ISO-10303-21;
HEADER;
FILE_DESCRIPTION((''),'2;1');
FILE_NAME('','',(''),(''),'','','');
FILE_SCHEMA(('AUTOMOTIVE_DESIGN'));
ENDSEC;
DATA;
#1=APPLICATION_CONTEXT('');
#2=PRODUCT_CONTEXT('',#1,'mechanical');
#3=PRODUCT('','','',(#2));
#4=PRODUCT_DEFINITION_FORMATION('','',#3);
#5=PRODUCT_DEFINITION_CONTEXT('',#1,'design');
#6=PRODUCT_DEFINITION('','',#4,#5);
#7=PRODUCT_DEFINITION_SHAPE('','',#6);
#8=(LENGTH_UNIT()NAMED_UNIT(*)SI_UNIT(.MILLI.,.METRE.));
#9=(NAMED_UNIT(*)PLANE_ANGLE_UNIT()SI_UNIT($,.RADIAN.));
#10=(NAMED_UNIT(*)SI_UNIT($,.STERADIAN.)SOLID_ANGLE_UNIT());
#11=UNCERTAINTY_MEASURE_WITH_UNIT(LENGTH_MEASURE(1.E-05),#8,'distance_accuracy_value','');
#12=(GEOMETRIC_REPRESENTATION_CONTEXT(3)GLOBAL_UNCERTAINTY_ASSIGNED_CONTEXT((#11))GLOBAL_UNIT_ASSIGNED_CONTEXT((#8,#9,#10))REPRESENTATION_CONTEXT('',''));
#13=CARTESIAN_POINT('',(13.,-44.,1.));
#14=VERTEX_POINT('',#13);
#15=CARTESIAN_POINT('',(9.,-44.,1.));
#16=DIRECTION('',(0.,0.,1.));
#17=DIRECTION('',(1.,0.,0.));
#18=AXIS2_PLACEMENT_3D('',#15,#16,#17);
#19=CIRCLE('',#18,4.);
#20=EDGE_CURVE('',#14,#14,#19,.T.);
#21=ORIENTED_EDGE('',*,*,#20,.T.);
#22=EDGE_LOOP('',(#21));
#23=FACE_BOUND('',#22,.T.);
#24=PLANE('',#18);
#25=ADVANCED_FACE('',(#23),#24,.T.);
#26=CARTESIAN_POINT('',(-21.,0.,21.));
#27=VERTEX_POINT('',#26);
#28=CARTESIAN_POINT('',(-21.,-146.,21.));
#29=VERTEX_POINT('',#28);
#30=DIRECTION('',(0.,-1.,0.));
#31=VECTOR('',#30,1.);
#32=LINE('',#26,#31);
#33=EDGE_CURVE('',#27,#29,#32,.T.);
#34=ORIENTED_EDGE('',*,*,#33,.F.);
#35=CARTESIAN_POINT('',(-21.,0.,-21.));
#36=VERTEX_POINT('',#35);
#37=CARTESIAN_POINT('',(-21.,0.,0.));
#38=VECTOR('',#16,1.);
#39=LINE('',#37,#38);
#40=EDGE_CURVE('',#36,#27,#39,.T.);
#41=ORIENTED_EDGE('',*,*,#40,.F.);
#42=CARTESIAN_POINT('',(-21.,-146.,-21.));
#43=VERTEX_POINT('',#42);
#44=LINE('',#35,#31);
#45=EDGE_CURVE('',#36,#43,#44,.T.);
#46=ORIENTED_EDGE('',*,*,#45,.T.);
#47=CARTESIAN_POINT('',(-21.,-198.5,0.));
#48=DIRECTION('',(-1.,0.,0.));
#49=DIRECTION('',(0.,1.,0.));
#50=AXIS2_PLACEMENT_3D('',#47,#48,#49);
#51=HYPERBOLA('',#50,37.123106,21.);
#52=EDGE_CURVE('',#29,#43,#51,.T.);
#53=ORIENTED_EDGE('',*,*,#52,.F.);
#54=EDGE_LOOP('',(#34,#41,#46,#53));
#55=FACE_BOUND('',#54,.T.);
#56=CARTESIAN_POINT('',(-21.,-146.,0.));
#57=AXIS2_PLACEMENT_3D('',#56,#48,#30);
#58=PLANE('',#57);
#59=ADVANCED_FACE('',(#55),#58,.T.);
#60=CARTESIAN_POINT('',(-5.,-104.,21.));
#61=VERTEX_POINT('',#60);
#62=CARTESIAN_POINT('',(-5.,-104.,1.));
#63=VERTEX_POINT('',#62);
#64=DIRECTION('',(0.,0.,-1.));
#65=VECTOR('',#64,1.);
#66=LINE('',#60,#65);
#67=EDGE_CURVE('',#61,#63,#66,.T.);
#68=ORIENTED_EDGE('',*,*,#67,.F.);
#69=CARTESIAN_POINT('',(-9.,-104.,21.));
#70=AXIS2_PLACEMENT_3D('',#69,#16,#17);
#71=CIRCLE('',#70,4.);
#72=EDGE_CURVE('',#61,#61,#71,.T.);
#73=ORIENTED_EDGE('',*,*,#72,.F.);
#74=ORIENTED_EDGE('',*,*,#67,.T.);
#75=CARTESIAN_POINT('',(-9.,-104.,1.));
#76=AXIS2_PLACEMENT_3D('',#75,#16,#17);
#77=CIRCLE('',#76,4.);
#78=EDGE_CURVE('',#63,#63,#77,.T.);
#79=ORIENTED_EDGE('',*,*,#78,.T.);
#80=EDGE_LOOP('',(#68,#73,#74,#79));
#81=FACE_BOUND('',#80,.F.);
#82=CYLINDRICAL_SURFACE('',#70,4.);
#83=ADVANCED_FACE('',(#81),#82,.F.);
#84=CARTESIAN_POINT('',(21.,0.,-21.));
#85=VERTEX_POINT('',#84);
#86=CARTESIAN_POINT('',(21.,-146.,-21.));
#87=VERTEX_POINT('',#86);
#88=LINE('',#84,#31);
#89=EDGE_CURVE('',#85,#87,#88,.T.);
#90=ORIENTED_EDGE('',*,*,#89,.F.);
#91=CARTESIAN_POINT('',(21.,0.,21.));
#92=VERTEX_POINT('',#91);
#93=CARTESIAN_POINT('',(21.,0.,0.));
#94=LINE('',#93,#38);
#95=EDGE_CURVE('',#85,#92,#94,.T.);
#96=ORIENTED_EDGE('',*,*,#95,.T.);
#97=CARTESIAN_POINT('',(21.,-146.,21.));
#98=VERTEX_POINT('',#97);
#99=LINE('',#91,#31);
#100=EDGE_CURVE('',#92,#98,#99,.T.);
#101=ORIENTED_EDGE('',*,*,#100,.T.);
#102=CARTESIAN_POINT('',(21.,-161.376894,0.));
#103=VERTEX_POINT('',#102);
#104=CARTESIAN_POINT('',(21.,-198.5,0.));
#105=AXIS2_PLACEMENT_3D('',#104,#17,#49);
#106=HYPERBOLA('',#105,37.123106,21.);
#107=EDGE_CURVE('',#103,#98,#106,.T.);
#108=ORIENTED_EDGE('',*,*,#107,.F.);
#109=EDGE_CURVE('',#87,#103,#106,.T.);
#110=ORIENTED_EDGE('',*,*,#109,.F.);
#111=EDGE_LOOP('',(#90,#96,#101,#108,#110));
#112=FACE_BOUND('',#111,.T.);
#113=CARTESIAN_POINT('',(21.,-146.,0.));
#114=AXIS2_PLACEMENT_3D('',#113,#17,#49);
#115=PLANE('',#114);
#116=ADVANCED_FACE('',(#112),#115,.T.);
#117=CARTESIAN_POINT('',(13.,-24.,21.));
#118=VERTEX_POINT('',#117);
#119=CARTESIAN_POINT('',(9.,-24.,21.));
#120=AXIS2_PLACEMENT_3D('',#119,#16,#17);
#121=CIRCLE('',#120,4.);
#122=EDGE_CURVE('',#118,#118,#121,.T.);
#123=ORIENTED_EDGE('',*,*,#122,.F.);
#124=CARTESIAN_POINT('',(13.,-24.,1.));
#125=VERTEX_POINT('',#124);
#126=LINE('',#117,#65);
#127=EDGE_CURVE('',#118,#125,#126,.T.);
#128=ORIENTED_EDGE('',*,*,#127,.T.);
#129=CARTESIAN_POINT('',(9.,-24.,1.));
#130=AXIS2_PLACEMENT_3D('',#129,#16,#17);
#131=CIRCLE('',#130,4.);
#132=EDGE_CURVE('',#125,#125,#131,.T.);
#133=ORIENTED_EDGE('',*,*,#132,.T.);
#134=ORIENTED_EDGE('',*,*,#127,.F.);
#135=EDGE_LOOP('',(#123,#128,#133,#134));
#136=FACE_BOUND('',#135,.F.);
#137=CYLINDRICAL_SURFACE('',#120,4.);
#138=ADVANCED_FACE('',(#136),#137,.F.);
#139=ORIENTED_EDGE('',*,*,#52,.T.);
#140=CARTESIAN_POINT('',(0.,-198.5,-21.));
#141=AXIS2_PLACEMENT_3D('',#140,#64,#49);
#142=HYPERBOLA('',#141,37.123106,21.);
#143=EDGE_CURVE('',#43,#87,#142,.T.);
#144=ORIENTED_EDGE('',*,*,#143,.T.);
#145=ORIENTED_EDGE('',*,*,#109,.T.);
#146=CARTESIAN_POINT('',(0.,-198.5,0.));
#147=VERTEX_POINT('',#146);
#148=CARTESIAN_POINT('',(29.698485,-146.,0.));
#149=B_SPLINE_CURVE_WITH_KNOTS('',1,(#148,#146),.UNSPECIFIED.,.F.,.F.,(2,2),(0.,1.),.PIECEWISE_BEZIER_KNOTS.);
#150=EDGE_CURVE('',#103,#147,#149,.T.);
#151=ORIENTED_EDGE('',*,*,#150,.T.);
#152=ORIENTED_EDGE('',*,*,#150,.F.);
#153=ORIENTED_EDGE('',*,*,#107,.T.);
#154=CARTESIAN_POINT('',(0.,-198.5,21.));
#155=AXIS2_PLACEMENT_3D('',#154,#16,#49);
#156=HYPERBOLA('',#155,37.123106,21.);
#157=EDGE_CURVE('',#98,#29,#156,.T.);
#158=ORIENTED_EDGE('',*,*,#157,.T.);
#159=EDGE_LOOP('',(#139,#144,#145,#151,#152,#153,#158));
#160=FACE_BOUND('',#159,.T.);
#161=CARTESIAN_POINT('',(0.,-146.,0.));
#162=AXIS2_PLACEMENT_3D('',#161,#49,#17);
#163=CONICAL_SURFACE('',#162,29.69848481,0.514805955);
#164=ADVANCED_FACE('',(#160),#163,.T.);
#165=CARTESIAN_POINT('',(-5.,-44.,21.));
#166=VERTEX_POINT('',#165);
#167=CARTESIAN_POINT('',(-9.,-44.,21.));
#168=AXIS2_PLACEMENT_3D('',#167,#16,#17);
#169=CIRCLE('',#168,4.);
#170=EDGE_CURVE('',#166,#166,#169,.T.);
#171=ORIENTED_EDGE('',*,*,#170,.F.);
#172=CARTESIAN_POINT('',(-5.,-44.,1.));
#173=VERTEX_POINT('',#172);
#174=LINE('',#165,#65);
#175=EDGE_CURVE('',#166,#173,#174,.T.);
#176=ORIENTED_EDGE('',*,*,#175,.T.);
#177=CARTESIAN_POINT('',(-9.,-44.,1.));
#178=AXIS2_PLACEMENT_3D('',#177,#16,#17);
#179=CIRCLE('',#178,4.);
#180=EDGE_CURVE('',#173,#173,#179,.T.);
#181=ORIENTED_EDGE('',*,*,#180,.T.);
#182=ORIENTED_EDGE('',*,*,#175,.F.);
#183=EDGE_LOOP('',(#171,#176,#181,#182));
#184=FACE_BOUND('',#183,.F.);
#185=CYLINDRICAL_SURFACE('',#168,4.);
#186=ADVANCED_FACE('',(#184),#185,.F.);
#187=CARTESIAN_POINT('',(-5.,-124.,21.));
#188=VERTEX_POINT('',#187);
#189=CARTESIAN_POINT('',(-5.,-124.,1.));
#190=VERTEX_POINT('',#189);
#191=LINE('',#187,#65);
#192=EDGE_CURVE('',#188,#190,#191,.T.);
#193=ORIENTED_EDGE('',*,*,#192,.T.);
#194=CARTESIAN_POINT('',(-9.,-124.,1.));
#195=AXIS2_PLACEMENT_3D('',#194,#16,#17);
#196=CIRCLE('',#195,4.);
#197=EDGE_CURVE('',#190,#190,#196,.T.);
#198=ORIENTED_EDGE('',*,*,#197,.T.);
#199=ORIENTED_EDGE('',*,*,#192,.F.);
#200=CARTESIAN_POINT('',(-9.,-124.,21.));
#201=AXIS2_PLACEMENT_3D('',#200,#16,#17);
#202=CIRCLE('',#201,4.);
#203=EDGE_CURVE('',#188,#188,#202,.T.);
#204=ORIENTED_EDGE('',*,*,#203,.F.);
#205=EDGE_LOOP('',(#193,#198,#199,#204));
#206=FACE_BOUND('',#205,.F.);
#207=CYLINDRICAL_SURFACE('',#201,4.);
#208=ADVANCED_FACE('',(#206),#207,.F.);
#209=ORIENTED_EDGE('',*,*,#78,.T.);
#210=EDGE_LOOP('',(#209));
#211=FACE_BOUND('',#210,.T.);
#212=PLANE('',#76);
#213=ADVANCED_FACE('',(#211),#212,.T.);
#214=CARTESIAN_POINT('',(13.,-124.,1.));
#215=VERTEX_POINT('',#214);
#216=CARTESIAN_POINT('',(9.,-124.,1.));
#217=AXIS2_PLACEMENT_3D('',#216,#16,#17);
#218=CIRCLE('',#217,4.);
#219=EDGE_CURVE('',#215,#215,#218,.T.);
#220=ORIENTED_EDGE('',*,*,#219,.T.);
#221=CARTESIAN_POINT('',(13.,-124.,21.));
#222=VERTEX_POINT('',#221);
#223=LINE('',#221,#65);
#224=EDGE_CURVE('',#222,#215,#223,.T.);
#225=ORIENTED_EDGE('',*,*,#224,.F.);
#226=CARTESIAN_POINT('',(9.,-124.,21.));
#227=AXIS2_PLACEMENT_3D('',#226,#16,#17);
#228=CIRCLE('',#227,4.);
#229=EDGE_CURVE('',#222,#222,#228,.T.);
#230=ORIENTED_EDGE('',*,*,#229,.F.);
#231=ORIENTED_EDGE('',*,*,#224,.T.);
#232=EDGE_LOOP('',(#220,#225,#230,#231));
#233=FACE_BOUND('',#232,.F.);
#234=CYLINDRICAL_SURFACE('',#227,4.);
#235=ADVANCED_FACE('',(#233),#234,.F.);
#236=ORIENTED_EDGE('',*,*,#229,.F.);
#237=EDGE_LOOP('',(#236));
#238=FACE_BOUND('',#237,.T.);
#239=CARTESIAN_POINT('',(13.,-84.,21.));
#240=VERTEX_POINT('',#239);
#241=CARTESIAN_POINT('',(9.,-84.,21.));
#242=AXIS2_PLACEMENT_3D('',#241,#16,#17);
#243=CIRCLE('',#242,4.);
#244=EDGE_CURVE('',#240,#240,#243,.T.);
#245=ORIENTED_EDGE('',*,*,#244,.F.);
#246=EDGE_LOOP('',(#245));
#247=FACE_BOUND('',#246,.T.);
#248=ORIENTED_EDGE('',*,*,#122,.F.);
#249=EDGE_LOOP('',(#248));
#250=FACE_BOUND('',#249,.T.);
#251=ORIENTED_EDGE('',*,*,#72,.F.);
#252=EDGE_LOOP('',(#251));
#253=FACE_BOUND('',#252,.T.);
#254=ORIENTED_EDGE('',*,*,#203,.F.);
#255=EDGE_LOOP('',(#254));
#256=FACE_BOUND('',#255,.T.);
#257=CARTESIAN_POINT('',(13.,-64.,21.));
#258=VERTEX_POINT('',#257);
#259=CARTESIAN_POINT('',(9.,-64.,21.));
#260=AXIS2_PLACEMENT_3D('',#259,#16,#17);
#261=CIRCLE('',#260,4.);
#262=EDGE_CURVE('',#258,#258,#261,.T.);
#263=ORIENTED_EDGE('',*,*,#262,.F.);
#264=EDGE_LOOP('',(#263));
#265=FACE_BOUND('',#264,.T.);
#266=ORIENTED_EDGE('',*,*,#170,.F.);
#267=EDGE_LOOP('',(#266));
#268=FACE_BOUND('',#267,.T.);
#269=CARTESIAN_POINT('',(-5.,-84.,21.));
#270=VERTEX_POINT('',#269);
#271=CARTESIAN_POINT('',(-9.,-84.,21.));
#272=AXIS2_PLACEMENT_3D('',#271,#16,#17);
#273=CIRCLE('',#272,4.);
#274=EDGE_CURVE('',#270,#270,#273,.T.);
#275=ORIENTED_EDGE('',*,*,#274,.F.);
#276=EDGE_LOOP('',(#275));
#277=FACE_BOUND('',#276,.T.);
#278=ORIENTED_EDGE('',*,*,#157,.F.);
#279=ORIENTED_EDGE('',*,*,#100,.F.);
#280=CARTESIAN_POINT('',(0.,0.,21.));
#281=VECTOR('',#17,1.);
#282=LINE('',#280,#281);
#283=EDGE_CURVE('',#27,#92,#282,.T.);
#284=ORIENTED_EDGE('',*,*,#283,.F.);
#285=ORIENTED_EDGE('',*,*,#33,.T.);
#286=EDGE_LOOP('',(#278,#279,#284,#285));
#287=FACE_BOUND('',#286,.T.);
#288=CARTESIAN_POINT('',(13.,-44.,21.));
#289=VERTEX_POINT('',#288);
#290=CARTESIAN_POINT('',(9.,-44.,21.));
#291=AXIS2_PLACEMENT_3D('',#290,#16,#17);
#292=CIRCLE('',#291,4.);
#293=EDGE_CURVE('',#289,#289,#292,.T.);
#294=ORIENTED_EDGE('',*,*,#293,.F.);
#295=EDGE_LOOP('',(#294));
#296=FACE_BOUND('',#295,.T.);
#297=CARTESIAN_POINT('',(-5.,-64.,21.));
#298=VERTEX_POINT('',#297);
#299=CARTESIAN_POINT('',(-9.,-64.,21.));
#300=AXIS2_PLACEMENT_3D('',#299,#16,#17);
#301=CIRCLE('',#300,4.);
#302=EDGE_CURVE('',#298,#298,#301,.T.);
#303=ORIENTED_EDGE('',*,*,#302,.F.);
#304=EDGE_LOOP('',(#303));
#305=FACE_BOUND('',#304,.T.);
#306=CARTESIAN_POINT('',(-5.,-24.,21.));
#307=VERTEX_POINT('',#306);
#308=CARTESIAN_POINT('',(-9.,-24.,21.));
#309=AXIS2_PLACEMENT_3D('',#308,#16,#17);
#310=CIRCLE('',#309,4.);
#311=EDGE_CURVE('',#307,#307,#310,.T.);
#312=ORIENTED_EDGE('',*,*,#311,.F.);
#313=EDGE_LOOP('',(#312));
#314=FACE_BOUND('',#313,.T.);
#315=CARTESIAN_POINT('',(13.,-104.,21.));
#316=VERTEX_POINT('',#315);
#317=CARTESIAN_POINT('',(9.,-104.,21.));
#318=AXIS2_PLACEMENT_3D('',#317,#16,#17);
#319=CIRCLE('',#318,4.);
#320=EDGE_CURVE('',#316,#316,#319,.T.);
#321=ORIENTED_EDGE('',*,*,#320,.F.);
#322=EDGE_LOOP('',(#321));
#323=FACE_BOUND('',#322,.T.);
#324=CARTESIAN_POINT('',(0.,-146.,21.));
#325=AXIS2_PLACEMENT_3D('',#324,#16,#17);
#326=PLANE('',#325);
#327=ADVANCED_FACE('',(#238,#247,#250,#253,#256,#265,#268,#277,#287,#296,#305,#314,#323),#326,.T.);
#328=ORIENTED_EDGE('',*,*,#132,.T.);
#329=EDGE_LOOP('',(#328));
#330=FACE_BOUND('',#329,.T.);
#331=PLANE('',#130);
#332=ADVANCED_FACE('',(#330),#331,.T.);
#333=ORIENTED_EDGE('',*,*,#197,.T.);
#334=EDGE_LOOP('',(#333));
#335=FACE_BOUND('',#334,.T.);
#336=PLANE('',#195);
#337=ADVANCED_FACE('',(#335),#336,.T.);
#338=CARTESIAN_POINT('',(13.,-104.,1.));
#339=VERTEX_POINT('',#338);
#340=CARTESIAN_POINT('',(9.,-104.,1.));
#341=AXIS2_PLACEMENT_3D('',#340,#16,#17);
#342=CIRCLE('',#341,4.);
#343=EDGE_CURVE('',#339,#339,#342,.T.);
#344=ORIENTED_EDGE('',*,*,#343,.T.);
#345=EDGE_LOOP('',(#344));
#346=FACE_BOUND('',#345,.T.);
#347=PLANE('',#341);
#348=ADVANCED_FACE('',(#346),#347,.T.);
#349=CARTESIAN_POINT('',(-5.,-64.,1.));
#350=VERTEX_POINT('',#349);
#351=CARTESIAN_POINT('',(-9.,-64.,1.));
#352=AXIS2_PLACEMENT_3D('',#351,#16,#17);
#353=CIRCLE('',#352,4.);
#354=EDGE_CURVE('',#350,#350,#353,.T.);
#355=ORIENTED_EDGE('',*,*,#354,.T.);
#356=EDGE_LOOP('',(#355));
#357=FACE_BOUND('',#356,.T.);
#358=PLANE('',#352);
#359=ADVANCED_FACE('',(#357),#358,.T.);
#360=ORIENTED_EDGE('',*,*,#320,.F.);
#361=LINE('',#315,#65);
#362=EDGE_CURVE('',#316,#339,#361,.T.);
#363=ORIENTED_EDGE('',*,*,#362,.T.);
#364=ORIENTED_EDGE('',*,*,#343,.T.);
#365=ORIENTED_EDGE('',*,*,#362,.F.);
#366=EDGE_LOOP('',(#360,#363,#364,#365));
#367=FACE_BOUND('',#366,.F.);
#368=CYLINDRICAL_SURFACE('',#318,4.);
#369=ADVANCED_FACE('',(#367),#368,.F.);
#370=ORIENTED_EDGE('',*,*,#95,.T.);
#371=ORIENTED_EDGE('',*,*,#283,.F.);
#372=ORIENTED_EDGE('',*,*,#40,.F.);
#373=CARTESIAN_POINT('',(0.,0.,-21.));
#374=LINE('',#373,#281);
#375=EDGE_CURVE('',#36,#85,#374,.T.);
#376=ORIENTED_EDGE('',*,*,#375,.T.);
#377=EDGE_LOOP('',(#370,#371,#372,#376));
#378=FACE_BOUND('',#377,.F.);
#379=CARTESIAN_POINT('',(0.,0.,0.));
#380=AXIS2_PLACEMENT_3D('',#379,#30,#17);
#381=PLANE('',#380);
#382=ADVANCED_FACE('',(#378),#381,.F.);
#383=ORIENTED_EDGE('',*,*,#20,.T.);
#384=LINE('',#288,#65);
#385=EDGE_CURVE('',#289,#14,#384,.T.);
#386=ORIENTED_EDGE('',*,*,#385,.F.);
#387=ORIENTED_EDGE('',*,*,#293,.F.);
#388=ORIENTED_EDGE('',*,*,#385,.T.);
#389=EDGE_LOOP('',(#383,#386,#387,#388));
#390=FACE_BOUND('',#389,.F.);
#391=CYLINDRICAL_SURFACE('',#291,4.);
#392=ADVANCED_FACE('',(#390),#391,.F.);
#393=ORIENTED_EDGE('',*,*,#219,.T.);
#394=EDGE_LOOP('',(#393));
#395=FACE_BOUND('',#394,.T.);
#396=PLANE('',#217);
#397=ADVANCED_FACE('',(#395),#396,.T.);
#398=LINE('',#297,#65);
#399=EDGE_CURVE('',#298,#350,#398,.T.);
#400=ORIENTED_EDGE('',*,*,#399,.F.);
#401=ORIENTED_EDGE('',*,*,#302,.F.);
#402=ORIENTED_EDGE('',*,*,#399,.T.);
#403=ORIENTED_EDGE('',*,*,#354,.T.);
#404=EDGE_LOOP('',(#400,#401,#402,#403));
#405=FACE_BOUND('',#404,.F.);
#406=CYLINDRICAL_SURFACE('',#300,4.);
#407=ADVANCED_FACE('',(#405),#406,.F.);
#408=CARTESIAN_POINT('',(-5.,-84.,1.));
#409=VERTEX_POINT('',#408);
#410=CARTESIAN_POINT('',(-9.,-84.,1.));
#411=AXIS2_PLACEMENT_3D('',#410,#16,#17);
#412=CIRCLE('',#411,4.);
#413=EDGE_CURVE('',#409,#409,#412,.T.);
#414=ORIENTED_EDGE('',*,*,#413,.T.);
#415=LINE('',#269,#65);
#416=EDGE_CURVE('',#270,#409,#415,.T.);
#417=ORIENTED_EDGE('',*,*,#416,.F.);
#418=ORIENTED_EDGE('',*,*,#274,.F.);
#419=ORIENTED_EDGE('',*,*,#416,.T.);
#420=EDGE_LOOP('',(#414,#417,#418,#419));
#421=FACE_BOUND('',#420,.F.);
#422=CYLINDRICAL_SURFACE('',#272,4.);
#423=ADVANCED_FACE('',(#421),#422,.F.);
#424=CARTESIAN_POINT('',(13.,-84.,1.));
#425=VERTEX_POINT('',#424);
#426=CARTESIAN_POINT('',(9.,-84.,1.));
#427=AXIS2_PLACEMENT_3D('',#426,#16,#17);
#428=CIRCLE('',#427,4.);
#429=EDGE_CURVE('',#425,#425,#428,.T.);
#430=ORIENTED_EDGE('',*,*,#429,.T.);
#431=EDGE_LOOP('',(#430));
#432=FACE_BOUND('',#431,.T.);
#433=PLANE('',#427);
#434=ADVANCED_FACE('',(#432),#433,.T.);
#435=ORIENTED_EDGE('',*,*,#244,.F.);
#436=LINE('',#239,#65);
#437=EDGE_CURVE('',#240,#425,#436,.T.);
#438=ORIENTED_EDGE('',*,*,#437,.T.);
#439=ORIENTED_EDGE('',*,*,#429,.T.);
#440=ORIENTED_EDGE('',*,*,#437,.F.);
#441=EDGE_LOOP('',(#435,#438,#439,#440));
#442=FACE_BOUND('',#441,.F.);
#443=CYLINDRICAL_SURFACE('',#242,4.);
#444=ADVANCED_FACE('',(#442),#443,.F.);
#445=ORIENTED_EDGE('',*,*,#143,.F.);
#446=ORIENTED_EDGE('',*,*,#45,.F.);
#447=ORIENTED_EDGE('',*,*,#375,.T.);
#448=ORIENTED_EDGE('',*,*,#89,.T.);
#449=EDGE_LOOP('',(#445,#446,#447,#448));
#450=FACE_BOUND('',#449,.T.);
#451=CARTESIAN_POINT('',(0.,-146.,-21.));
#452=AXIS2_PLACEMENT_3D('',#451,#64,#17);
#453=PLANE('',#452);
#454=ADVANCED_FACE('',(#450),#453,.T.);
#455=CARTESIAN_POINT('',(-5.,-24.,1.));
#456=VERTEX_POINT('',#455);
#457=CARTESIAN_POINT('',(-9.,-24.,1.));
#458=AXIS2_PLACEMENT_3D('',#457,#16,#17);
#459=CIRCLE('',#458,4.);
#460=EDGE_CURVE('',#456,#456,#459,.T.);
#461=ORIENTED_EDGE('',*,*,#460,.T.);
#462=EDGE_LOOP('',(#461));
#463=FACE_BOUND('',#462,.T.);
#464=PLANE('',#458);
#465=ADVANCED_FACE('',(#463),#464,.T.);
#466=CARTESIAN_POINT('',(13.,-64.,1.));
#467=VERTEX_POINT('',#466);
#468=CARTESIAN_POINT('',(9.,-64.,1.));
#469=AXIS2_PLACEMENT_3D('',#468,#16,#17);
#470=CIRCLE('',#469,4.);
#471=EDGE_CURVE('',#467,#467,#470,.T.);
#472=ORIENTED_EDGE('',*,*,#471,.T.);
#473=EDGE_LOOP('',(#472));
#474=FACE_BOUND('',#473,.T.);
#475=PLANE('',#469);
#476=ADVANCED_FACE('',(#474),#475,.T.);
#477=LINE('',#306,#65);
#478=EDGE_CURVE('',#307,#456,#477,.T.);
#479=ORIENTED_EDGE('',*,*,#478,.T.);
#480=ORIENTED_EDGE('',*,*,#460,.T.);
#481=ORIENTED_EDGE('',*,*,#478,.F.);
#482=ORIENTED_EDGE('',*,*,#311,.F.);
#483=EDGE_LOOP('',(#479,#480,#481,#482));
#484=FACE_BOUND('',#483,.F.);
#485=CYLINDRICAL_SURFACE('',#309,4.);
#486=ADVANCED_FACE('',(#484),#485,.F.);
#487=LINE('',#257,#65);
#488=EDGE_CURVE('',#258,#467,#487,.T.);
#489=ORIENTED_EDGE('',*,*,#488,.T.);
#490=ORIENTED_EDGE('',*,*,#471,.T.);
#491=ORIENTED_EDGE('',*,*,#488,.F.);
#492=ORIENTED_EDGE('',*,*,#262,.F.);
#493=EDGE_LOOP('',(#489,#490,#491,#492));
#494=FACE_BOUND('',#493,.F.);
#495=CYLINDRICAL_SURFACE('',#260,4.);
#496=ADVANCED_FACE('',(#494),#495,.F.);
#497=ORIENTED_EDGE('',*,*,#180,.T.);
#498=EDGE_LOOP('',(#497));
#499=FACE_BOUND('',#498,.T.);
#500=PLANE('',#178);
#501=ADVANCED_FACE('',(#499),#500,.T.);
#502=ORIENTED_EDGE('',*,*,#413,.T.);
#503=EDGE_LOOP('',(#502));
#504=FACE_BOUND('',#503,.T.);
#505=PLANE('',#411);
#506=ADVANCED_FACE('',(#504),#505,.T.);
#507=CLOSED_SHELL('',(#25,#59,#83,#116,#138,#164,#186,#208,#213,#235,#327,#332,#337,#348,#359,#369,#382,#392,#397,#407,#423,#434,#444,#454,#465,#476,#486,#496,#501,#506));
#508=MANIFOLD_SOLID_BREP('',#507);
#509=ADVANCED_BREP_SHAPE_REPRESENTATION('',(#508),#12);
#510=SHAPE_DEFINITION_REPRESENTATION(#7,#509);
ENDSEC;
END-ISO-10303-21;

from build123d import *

# Parameters (mm, degrees)
F0_W      = 42
F0_H      = 42
F1_DEPTH  = 146
F2_R      = 29.6984848098
F4_R      = 21
F5_DEPTH  = 25
F6_R      = 21
F9_DEPTH  = 25
F7_R      = 21
F10_DEPTH = 25
F8_R      = 21
F11_DEPTH = 25
F12_R     = 4
F13_DEPTH = 20


# Not quite as in the source:
# - an extrude whose draft closes it to a point is written as a loft to that point


with BuildPart() as f1:
    # F0 (on Front) → F1 (new body)
    with BuildSketch(Plane.XZ):
        Rectangle(F0_W, F0_H)
    extrude(amount=F1_DEPTH)

    # F2 (on face) → F3 section 0
    with BuildSketch(Plane.XZ.offset(146), mode=Mode.PRIVATE) as f3_s0:
        Circle(F2_R)
    loft([f3_s0.sketch, Vertex(0, -198.4999999927, 0)], ruled=True)

    # F4 (on face) → F5 (cut)
    with BuildSketch(Plane(origin=(-21, 0, 0), x_dir=(0, -1, 0), z_dir=(-1, 0, 0))):
        with Locations((146, 0)):
            Circle(F4_R)
    extrude(amount=F5_DEPTH, mode=Mode.SUBTRACT)

    # F6 (on face) → F9 (cut)
    with BuildSketch(Plane.XY.offset(21)):
        with Locations((0, -146)):
            Circle(F6_R)
    extrude(amount=F9_DEPTH, mode=Mode.SUBTRACT)

    # F7 (on face) → F10 (cut)
    with BuildSketch(Plane.YZ.offset(21)):
        with Locations((-146, 0)):
            Circle(F7_R)
    extrude(amount=F10_DEPTH, mode=Mode.SUBTRACT)

    # F8 (on face) → F11 (cut)
    with BuildSketch(Plane(origin=(0, 0, -21), x_dir=(1, 0, 0), z_dir=(0, 0, -1))):
        with Locations((0, 146)):
            Circle(F8_R)
    extrude(amount=F11_DEPTH, mode=Mode.SUBTRACT)

    # F12 (on face) → F13 (cut)
    with BuildSketch(Plane.XY.offset(21)):
        with Locations((-9, -24)):
            Circle(F12_R)
        with Locations((-9, -44)):
            Circle(F12_R)
        with Locations((-9, -64)):
            Circle(F12_R)
        with Locations((-9, -84)):
            Circle(F12_R)
        with Locations((-9, -104)):
            Circle(F12_R)
        with Locations((-9, -124)):
            Circle(F12_R)
        with Locations((9, -24)):
            Circle(F12_R)
        with Locations((9, -44)):
            Circle(F12_R)
        with Locations((9, -64)):
            Circle(F12_R)
        with Locations((9, -84)):
            Circle(F12_R)
        with Locations((9, -104)):
            Circle(F12_R)
        with Locations((9, -124)):
            Circle(F12_R)
    extrude(amount=-F13_DEPTH, mode=Mode.SUBTRACT)


solid = f1.part
